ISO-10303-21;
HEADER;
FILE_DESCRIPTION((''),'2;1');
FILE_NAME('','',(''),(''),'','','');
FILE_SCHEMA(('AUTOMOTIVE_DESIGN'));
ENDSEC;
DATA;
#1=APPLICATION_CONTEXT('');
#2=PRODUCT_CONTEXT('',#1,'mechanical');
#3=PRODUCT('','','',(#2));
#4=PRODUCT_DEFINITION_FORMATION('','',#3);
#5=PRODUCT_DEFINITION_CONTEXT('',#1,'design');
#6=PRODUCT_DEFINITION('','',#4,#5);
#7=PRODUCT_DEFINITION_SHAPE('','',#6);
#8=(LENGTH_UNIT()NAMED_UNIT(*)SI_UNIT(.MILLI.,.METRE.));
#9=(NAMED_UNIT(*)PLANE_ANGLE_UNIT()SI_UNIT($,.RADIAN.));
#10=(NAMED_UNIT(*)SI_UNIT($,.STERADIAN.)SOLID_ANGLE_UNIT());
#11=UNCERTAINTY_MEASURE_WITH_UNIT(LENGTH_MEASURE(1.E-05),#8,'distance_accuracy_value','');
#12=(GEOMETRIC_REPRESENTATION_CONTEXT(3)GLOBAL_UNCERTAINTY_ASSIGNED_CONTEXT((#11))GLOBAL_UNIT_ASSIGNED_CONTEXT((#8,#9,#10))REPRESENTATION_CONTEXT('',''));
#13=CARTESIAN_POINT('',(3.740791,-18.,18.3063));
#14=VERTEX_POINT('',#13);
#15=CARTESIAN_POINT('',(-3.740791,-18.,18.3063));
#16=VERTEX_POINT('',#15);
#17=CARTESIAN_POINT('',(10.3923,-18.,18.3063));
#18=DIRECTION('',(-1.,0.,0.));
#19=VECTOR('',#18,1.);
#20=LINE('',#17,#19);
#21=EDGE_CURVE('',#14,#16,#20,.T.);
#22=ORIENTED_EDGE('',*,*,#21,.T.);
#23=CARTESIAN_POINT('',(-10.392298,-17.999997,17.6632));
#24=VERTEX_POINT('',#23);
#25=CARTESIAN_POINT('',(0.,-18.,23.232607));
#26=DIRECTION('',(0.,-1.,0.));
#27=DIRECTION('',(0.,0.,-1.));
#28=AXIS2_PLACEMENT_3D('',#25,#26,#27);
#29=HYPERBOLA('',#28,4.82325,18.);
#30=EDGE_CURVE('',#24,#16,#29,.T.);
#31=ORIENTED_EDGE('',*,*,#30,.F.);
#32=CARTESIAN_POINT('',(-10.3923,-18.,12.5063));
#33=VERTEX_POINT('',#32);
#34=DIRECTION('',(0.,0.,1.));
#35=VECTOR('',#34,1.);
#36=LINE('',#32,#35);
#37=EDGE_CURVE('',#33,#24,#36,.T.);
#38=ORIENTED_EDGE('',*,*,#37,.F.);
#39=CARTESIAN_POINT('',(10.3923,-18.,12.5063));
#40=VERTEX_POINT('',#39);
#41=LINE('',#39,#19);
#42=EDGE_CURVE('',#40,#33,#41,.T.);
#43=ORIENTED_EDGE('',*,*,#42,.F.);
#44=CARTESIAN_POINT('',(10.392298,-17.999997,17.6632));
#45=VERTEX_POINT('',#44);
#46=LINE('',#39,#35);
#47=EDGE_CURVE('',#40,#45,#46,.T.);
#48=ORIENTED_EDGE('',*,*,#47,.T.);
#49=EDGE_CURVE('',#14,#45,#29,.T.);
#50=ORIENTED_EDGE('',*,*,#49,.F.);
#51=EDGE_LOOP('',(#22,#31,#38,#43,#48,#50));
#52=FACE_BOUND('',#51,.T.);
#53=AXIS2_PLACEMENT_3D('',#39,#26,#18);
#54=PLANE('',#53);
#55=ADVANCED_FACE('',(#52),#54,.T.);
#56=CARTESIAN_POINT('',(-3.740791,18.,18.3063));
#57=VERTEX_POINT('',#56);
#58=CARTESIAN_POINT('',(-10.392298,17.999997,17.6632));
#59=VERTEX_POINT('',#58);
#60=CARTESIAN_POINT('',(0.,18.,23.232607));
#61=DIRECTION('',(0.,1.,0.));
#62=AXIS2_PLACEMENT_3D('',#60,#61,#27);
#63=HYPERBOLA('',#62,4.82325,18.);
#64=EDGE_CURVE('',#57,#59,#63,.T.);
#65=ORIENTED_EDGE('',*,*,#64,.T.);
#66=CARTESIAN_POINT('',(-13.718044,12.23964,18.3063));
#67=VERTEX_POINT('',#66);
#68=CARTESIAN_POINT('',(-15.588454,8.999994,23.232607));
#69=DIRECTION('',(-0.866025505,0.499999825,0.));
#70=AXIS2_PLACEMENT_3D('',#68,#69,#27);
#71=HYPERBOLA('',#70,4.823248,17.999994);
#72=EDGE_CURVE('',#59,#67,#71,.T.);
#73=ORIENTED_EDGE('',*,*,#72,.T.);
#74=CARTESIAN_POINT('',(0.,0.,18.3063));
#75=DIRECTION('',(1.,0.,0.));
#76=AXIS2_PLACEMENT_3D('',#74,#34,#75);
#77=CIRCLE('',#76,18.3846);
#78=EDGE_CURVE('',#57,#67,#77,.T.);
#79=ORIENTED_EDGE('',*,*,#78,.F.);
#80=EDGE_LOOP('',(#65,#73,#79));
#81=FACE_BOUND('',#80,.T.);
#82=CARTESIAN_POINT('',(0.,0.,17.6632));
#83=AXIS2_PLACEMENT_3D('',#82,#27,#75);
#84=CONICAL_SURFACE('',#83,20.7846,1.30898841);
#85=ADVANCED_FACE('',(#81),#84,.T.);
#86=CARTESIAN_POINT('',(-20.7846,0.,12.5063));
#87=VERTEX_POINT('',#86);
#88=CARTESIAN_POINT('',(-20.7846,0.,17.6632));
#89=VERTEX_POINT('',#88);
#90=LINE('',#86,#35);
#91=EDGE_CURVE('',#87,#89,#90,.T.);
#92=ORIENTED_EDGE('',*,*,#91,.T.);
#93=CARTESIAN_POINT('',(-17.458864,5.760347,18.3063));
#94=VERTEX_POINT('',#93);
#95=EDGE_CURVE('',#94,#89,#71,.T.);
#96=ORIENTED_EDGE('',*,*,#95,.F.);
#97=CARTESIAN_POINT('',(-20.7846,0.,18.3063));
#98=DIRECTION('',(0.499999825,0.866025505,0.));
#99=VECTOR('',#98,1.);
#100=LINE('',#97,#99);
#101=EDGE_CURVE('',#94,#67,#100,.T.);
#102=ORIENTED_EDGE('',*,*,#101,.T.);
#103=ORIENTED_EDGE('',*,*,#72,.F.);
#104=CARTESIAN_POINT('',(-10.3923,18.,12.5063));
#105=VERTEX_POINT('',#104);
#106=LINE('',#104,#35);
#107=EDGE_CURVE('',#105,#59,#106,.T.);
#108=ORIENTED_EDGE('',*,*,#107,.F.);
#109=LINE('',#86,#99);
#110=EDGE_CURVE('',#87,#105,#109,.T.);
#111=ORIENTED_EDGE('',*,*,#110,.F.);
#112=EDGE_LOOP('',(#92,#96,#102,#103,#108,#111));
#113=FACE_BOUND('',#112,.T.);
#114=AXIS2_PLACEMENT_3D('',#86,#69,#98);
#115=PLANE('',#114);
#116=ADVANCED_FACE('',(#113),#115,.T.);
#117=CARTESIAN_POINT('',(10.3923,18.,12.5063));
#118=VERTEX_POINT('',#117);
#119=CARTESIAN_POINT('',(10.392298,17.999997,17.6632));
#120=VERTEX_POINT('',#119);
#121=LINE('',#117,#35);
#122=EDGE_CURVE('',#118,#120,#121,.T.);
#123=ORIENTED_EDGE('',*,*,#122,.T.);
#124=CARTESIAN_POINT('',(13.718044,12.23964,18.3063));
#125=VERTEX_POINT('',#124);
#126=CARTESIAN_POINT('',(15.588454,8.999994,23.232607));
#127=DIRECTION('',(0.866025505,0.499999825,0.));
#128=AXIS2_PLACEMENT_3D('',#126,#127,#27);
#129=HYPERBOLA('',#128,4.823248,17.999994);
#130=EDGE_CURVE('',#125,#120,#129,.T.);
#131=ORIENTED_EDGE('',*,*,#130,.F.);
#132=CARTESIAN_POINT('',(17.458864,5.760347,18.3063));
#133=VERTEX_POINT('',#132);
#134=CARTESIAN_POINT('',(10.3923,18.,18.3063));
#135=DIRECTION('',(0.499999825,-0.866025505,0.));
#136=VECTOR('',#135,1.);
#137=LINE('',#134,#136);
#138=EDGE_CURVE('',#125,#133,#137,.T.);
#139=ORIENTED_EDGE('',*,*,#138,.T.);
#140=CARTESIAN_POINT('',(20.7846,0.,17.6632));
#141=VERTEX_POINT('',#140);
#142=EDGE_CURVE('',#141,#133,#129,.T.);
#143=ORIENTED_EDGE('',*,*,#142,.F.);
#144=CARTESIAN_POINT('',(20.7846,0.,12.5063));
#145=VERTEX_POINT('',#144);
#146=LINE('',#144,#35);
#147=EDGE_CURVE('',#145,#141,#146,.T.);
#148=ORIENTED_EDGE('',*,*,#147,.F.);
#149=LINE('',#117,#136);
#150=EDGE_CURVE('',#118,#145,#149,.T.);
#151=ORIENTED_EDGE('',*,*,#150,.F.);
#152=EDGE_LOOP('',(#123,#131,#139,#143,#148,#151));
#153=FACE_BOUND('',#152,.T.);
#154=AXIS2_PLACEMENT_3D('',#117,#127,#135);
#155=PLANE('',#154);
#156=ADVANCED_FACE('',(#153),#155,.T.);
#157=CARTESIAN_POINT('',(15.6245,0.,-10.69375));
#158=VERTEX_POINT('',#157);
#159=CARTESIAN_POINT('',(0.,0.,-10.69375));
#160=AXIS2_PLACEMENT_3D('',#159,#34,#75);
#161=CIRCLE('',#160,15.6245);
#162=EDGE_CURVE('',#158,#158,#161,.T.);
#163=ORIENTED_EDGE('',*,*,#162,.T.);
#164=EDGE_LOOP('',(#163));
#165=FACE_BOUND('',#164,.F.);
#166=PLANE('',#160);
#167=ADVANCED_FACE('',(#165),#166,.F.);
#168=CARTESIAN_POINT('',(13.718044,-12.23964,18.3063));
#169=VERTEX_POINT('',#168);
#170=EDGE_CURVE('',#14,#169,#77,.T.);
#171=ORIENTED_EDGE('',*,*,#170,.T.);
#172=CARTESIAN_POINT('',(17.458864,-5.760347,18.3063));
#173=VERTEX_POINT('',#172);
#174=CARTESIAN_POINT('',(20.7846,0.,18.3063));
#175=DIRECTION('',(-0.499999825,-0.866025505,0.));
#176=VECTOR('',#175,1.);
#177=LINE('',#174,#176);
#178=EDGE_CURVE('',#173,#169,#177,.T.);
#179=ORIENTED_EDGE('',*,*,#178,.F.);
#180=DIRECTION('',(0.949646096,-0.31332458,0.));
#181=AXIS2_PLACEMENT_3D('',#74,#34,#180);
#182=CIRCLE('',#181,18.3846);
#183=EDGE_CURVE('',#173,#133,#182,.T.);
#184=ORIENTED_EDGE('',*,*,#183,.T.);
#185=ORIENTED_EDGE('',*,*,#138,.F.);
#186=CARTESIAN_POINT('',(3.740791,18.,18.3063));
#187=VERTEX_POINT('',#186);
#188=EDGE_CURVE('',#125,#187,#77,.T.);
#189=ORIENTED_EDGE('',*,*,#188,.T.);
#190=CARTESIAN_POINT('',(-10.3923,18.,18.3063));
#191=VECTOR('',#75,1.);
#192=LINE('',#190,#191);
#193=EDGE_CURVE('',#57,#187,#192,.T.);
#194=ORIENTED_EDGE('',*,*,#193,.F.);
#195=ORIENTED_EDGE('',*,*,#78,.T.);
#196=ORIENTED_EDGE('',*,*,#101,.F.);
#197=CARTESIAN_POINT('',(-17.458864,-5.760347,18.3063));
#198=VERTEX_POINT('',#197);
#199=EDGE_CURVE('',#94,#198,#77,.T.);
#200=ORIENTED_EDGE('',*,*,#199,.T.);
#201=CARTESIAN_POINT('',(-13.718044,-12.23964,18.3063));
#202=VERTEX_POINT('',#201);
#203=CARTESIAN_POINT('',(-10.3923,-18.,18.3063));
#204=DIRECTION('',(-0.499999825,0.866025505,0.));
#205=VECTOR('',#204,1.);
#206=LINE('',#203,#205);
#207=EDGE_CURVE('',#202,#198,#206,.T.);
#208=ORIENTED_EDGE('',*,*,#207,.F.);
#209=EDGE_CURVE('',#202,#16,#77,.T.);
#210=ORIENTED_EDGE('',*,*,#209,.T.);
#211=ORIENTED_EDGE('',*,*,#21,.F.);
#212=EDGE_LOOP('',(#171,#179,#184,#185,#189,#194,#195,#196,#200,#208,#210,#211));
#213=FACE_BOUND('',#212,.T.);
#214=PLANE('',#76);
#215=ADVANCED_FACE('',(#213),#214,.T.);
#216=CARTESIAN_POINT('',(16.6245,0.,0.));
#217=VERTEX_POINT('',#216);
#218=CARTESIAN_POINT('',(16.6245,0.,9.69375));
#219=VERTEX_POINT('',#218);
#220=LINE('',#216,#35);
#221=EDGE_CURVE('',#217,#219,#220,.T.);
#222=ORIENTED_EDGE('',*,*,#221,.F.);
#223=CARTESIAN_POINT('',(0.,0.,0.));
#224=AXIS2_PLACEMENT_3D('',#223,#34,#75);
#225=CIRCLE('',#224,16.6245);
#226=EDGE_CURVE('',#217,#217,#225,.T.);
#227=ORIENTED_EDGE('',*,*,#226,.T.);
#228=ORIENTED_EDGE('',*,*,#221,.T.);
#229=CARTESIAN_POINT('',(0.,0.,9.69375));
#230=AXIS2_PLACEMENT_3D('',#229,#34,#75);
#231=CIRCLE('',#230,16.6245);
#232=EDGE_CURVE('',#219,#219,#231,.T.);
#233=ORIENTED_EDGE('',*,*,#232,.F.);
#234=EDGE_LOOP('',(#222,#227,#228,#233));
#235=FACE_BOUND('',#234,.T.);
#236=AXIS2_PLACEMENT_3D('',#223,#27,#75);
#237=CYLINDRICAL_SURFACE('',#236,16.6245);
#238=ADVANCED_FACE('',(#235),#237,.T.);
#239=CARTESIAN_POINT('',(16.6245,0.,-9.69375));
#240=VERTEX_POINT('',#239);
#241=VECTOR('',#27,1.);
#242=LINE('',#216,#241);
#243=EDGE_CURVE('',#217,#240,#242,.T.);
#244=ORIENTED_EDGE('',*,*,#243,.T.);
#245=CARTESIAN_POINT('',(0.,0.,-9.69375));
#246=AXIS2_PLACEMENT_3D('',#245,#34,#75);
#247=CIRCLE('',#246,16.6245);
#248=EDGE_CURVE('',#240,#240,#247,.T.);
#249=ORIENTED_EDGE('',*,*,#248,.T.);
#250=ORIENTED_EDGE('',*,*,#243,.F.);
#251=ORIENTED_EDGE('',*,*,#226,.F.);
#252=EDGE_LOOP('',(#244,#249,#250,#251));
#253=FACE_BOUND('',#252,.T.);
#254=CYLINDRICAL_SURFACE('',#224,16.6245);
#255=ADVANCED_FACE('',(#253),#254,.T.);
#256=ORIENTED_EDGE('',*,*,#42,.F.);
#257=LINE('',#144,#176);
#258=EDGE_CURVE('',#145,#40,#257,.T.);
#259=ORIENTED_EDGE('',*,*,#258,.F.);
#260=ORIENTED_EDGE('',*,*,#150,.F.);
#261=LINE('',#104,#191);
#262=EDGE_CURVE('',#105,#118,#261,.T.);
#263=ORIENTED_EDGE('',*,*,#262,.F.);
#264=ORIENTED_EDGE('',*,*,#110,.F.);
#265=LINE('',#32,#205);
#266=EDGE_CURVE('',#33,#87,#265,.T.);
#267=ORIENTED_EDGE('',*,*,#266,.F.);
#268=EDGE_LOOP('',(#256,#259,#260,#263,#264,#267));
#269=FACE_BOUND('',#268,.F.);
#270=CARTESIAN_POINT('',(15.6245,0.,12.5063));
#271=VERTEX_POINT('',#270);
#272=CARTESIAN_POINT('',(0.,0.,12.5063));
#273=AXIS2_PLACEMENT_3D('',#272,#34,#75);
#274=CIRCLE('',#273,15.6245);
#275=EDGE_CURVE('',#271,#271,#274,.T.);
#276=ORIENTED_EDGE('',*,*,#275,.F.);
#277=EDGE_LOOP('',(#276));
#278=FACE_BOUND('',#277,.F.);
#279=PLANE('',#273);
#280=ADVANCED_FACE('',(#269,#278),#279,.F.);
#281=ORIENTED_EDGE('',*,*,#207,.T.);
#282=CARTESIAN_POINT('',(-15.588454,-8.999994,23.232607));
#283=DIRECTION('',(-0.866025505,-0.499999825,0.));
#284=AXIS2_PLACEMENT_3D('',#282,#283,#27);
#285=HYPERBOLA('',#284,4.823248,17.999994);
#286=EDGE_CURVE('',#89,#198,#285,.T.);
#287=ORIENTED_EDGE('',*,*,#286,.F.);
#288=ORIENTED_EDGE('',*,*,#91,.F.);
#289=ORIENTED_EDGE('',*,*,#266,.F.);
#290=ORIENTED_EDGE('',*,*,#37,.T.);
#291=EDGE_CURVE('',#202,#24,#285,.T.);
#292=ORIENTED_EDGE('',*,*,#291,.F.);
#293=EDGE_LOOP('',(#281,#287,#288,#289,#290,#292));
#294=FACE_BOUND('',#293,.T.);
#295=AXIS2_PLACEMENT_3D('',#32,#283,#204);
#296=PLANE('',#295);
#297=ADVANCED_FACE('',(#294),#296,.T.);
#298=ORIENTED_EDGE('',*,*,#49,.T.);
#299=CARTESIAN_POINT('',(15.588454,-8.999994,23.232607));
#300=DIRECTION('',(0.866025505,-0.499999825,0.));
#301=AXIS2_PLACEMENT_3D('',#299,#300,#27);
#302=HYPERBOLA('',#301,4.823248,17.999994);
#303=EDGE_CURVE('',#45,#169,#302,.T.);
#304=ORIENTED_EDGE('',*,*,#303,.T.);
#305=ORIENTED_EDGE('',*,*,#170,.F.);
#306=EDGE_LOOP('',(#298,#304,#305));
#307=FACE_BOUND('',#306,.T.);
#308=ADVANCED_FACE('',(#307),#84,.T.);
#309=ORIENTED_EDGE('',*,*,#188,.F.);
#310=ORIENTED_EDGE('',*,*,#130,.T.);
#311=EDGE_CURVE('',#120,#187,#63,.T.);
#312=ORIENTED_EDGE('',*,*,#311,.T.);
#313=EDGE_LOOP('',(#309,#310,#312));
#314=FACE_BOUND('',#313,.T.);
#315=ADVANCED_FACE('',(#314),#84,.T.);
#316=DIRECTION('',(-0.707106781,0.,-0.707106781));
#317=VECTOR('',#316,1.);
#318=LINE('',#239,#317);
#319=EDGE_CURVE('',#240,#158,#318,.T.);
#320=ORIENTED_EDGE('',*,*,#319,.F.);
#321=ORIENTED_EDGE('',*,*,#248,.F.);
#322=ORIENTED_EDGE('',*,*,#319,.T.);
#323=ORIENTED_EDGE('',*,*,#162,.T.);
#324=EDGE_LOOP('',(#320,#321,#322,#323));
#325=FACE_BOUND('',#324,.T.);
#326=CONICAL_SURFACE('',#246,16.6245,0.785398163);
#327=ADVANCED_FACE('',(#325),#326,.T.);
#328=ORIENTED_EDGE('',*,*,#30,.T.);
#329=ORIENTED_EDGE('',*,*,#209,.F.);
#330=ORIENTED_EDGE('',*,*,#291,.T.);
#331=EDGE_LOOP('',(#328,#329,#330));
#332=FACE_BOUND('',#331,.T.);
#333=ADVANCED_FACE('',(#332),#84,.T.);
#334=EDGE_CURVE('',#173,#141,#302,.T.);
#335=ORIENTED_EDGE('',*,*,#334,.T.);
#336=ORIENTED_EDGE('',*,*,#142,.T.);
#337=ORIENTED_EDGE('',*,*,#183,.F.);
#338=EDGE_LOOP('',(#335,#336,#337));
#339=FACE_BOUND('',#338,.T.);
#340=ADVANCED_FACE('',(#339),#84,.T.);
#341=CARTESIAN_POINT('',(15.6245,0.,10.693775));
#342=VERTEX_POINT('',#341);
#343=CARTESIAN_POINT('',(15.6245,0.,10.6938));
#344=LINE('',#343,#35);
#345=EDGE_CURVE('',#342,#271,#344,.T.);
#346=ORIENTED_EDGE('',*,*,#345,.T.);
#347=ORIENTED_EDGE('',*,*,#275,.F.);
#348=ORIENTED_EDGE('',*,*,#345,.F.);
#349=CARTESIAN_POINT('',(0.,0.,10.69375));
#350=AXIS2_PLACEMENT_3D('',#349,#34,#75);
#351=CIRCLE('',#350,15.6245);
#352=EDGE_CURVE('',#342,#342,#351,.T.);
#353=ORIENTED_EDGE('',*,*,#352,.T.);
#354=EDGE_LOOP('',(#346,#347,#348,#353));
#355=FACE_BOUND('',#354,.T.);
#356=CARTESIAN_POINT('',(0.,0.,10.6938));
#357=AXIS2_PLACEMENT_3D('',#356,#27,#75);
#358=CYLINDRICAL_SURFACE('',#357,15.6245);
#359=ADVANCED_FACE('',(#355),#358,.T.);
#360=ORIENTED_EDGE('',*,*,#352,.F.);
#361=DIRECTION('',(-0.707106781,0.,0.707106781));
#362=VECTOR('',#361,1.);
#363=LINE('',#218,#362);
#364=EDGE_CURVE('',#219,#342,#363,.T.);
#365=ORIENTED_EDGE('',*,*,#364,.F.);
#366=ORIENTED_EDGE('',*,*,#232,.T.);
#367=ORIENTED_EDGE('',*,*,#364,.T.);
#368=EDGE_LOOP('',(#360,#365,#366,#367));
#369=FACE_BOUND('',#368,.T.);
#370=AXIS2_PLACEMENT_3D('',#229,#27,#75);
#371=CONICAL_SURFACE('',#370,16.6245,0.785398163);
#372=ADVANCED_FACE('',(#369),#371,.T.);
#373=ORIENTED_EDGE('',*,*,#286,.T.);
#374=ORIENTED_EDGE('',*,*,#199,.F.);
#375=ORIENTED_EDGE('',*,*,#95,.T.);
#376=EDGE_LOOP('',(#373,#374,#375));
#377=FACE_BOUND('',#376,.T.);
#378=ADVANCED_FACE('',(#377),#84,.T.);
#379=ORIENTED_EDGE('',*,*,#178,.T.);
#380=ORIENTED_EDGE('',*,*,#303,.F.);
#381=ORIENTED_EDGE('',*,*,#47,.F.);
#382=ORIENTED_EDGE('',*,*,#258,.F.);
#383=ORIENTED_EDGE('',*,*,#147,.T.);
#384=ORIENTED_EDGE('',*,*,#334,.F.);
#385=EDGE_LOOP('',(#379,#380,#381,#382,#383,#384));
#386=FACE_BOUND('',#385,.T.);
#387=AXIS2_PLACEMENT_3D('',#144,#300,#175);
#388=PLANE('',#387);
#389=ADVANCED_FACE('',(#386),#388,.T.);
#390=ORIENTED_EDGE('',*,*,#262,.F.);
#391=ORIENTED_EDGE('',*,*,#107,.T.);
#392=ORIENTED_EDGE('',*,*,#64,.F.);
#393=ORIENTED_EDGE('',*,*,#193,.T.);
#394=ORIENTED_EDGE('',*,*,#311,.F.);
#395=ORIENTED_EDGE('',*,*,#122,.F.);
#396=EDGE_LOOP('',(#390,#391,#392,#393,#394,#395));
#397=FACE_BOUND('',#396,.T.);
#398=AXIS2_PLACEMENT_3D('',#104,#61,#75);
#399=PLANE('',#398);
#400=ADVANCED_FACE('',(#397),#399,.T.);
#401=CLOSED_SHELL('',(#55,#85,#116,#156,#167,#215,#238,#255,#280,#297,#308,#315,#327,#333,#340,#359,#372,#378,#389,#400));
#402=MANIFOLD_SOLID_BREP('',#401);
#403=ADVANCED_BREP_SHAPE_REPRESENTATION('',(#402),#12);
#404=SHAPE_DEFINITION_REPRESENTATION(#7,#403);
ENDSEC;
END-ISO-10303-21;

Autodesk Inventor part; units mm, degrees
ref_plane "YZ Plane" through (0, 0, 0) normal (1, 0, 0) x (0, 1, 0)
ref_plane "XZ Plane" through (0, 0, 0) normal (0, 1, 0) x (-1, 0, 0)
ref_plane "XY Plane" through (0, 0, 0) normal (0, 0, 1) x (1, 0, 0)
sketch "Szkic7" plane through (0, 0, 0) normal (0, 0, 1) x (1, 0, 0)
  circle A0 centre (0, 0) radius 16.6245
  dimension "d35" = 33.249
extrude "Wyciągnięcie proste2" add sketch "Szkic7" along normal mid plane 21.3875
chamfer "Faza2" distance 1 angle 45 1 edges at (-16.6245, 0, 10.6938)
sketch "Szkic9" plane through (0, 0, 10.6938) normal (0, 0, 1) x (1, 0, 0)
  circle A0 centre (0, 0) radius 15.6245 projected
extrude "Wyciągnięcie proste3" add sketch "Szkic9" along normal blind 1.8125
sketch "Szkic10" plane through (0, 0, 12.5063) normal (0, 0, 1) x (1, 0, 0)
  line L0 (-10.3923, 18) -> (10.3923, 18)
  line L1 (10.3923, 18) -> (20.7846, 0)
  line L2 (20.7846, 0) -> (10.3923, -18)
  line L3 (10.3923, -18) -> (-10.3923, -18)
  line L4 (-10.3923, -18) -> (-20.7846, 0)
  line L5 (-20.7846, 0) -> (-10.3923, 18)
  line L6 (0, 23.2743) -> (0, -23.2743) construction
  line L7 (-23.2743, 0) -> (23.2743, 0) construction
  point P0 (0, 0)
  point P1 (0, 0)
  point P2 (0, 18)
  dimension "d44" = 36
extrude "Wyciągnięcie proste4" add sketch "Szkic10" along normal blind 5.8
sketch "Szkic12" plane through (0, 0, 0) normal (0, 1, 0) x (-1, 0, 0)
  line L0 (0, -2.1463) -> (0, 12.8775) construction
  line L1 (-10.3923, 12.5063) -> (-10.3923, 18.3063) construction
  line L2 (-20.7846, 18.3063) -> (-10.3923, 18.3063) construction
  line L3 (-20.7846, 12.5063) -> (-20.7846, 18.3063) projected
  line L4 (-20.7846, 17.6632) -> (-18.3846, 18.3063)
  line L5 (-20.7846, 18.3063) -> (-10.3923, 18.3063) projected
  line L6 (-20.7846, 12.5063) -> (-10.3923, 12.5063) projected
  point P0 (0, 0)
  dimension "d50" = 15
  dimension "d51" = 2.4
revolve "Obrót2" cut sketch "Szkic12" angle 360 about axis through (0, 0, -10) along (0, 0, 1)
thread "Gwint3" size "G33.249x2.309" designation "G 1" class "A" standard "ISO Pipe Threads" full length
chamfer "Faza3" distance 1 angle 45 1 edges at (-16.6245, 0, -10.6938)
equation "\"d35\" = OD"
equation "\"d36\" = 0.7375 * L"
equation "\"d42\" = 0.0625 * L"
equation "\"d44\" = SW"
equation "\"d45\" = 0.2 * L"
equation "\"d51\" = 0.0666667 * SW"
equation "\"SzerokośćGięciaPodcięcia\" = Grubość"
equation "\"RozmiarPodcięciaNarożnika\" = 4 * Grubość"
equation "\"PromieńPrzejścia\" = PromieńGięcia"
equation "\"Rozmiar_promienia_Jacobiego\" = PromieńGięcia"
equation "\"Wielk_odstępu\" = Grubość"
equation "\"d2\" = PromieńGięcia"
equation "\"d23\" = PromieńGięcia"
equation "\"OD\" = 33.249"
equation "\"SW\" = 36"
equation "\"L\" = 29"
equation "\"Grubość\" = 1.5"
equation "\"PromieńGięcia\" = 3"
properties part number "Korek sześciokątny BSP 1'' L=29" material "304"
